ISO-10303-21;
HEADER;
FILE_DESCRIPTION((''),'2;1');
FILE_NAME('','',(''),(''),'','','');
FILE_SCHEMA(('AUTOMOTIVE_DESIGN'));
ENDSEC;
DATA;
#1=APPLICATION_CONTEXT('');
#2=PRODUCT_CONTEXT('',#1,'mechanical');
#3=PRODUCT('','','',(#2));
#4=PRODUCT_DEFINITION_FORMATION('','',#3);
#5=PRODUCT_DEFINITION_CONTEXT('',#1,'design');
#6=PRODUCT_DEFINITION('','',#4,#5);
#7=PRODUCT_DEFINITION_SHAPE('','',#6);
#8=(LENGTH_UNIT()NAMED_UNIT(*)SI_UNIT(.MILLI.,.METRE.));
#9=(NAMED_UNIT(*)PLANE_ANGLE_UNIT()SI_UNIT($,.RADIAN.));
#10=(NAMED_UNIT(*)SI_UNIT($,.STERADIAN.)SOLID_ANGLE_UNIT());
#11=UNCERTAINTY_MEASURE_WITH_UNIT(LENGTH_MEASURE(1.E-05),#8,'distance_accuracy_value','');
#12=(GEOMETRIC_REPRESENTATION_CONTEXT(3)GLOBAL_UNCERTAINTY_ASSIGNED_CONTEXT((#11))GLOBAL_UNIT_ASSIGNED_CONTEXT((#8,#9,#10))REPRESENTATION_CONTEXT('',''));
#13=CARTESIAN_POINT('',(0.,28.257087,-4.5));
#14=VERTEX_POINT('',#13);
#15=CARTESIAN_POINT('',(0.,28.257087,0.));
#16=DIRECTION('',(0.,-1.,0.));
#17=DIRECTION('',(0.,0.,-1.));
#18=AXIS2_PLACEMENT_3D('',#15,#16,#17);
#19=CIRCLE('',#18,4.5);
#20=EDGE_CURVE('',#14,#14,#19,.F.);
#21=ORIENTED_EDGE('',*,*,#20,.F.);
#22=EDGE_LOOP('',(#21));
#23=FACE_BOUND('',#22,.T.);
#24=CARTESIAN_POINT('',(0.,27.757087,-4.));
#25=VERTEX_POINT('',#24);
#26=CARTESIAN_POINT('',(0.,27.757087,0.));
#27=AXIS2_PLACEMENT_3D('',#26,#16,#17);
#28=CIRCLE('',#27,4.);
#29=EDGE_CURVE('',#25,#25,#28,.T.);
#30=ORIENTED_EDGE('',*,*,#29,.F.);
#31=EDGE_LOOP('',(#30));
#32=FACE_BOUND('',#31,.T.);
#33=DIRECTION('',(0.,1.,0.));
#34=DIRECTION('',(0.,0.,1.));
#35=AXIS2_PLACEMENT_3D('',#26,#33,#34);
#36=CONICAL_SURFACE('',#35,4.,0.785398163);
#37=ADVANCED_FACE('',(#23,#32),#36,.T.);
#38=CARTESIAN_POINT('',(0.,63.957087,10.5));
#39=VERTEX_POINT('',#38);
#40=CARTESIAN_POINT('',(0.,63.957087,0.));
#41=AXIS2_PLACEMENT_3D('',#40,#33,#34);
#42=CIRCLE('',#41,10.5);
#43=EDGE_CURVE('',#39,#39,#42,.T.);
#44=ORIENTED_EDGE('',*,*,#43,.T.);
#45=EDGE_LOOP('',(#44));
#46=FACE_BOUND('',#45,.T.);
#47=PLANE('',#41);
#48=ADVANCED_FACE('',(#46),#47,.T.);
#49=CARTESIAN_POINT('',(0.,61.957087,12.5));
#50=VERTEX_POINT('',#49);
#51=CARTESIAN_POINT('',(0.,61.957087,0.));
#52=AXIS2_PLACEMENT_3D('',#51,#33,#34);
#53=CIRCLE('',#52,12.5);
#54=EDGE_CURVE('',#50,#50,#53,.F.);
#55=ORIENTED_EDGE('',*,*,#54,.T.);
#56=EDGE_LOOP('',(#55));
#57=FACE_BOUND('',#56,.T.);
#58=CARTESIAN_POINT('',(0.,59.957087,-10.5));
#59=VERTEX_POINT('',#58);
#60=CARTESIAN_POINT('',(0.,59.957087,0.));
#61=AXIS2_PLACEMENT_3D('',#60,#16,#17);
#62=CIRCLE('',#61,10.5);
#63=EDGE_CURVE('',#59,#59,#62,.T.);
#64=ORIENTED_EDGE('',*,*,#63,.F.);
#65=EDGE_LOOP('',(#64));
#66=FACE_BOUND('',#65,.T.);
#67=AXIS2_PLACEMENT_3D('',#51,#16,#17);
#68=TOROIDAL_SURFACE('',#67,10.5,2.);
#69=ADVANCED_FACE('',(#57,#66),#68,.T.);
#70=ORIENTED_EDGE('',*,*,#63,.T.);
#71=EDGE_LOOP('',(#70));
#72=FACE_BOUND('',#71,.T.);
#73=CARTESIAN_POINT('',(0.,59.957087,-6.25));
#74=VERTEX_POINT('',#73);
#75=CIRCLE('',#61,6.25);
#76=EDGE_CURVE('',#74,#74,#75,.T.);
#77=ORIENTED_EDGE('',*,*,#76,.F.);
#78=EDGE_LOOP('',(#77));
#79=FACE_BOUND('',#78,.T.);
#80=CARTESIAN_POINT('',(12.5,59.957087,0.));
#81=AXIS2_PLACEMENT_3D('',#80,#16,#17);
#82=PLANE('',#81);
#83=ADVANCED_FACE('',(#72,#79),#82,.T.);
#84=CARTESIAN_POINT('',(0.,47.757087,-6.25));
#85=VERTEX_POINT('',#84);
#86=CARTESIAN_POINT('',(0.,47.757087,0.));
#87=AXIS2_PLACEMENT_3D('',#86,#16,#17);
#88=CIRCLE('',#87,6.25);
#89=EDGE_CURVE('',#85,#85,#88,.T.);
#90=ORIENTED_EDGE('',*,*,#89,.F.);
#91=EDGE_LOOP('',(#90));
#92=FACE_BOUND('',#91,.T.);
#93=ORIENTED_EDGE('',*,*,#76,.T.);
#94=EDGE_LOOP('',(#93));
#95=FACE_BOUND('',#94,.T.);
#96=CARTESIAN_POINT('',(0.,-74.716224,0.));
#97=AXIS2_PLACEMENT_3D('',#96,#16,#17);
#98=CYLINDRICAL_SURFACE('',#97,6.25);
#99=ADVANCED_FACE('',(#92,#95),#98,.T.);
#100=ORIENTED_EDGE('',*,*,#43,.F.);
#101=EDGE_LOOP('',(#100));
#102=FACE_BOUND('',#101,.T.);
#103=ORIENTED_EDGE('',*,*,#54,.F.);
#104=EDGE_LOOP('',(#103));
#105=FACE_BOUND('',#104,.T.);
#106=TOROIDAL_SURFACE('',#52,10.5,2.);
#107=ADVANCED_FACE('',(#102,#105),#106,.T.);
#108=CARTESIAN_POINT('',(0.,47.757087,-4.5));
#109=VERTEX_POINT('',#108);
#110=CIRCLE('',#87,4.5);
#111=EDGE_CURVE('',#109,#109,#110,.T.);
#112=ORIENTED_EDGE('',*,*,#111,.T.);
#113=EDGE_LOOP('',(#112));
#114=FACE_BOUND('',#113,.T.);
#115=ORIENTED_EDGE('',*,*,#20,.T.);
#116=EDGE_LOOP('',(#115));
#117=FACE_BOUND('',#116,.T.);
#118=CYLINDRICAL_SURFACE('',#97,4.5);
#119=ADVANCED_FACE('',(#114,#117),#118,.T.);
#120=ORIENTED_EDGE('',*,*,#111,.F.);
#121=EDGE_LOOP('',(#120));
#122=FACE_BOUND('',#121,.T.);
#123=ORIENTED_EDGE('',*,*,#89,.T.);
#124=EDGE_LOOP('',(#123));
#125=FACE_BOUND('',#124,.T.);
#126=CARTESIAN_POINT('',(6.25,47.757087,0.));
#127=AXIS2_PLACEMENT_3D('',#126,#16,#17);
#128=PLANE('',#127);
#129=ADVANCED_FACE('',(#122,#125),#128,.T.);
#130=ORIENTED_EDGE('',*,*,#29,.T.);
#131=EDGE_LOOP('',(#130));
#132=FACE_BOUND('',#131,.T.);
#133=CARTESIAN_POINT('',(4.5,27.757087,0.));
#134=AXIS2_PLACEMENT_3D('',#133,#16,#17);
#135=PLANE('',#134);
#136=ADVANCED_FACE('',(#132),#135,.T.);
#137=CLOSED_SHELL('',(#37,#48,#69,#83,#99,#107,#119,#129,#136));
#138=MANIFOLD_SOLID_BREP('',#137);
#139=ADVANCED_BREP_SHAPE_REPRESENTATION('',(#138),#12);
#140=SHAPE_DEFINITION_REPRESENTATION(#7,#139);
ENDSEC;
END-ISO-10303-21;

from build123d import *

# Parameters (mm, degrees)
FILETE1_R     = 2
CHANFRO1_SIZE = 0.5


with BuildPart() as part:
    # Esboço1 → Revolução1 (revolve)
    with BuildSketch(Plane.XY, mode=Mode.PRIVATE) as revolu_o1_sk:
        Polygon((0, 63.957087486), (12.5, 63.957087486), (12.5, 59.957087486), (6.25, 59.957087486), (6.25, 47.757087486), (4.5, 47.757087486), (4.5, 27.757087486), (0, 27.757087486), align=None)
    revolve(revolu_o1_sk.sketch.rotate(Axis((0, -74.716223699, 0), (0, 1, 0)), 90), axis=Axis((0, -74.716223699, 0), (0, 1, 0)))

    # Filete1
    filete1_edges = [part.edges().sort_by_distance(p)[0] for p in [
        (0, 59.957087486, 12.5),
        (0, 63.957087486, 12.5),
    ]]
    fillet(filete1_edges, radius=FILETE1_R - 0.0001)  # a hair under: the kernel refuses the full size

    # Chanfro1
    chanfro1_edges = [part.edges().sort_by_distance(p)[0] for p in [
        (0, 27.757087486, 4.5),
    ]]
    chamfer(chanfro1_edges, length=CHANFRO1_SIZE)


solid = part.part
